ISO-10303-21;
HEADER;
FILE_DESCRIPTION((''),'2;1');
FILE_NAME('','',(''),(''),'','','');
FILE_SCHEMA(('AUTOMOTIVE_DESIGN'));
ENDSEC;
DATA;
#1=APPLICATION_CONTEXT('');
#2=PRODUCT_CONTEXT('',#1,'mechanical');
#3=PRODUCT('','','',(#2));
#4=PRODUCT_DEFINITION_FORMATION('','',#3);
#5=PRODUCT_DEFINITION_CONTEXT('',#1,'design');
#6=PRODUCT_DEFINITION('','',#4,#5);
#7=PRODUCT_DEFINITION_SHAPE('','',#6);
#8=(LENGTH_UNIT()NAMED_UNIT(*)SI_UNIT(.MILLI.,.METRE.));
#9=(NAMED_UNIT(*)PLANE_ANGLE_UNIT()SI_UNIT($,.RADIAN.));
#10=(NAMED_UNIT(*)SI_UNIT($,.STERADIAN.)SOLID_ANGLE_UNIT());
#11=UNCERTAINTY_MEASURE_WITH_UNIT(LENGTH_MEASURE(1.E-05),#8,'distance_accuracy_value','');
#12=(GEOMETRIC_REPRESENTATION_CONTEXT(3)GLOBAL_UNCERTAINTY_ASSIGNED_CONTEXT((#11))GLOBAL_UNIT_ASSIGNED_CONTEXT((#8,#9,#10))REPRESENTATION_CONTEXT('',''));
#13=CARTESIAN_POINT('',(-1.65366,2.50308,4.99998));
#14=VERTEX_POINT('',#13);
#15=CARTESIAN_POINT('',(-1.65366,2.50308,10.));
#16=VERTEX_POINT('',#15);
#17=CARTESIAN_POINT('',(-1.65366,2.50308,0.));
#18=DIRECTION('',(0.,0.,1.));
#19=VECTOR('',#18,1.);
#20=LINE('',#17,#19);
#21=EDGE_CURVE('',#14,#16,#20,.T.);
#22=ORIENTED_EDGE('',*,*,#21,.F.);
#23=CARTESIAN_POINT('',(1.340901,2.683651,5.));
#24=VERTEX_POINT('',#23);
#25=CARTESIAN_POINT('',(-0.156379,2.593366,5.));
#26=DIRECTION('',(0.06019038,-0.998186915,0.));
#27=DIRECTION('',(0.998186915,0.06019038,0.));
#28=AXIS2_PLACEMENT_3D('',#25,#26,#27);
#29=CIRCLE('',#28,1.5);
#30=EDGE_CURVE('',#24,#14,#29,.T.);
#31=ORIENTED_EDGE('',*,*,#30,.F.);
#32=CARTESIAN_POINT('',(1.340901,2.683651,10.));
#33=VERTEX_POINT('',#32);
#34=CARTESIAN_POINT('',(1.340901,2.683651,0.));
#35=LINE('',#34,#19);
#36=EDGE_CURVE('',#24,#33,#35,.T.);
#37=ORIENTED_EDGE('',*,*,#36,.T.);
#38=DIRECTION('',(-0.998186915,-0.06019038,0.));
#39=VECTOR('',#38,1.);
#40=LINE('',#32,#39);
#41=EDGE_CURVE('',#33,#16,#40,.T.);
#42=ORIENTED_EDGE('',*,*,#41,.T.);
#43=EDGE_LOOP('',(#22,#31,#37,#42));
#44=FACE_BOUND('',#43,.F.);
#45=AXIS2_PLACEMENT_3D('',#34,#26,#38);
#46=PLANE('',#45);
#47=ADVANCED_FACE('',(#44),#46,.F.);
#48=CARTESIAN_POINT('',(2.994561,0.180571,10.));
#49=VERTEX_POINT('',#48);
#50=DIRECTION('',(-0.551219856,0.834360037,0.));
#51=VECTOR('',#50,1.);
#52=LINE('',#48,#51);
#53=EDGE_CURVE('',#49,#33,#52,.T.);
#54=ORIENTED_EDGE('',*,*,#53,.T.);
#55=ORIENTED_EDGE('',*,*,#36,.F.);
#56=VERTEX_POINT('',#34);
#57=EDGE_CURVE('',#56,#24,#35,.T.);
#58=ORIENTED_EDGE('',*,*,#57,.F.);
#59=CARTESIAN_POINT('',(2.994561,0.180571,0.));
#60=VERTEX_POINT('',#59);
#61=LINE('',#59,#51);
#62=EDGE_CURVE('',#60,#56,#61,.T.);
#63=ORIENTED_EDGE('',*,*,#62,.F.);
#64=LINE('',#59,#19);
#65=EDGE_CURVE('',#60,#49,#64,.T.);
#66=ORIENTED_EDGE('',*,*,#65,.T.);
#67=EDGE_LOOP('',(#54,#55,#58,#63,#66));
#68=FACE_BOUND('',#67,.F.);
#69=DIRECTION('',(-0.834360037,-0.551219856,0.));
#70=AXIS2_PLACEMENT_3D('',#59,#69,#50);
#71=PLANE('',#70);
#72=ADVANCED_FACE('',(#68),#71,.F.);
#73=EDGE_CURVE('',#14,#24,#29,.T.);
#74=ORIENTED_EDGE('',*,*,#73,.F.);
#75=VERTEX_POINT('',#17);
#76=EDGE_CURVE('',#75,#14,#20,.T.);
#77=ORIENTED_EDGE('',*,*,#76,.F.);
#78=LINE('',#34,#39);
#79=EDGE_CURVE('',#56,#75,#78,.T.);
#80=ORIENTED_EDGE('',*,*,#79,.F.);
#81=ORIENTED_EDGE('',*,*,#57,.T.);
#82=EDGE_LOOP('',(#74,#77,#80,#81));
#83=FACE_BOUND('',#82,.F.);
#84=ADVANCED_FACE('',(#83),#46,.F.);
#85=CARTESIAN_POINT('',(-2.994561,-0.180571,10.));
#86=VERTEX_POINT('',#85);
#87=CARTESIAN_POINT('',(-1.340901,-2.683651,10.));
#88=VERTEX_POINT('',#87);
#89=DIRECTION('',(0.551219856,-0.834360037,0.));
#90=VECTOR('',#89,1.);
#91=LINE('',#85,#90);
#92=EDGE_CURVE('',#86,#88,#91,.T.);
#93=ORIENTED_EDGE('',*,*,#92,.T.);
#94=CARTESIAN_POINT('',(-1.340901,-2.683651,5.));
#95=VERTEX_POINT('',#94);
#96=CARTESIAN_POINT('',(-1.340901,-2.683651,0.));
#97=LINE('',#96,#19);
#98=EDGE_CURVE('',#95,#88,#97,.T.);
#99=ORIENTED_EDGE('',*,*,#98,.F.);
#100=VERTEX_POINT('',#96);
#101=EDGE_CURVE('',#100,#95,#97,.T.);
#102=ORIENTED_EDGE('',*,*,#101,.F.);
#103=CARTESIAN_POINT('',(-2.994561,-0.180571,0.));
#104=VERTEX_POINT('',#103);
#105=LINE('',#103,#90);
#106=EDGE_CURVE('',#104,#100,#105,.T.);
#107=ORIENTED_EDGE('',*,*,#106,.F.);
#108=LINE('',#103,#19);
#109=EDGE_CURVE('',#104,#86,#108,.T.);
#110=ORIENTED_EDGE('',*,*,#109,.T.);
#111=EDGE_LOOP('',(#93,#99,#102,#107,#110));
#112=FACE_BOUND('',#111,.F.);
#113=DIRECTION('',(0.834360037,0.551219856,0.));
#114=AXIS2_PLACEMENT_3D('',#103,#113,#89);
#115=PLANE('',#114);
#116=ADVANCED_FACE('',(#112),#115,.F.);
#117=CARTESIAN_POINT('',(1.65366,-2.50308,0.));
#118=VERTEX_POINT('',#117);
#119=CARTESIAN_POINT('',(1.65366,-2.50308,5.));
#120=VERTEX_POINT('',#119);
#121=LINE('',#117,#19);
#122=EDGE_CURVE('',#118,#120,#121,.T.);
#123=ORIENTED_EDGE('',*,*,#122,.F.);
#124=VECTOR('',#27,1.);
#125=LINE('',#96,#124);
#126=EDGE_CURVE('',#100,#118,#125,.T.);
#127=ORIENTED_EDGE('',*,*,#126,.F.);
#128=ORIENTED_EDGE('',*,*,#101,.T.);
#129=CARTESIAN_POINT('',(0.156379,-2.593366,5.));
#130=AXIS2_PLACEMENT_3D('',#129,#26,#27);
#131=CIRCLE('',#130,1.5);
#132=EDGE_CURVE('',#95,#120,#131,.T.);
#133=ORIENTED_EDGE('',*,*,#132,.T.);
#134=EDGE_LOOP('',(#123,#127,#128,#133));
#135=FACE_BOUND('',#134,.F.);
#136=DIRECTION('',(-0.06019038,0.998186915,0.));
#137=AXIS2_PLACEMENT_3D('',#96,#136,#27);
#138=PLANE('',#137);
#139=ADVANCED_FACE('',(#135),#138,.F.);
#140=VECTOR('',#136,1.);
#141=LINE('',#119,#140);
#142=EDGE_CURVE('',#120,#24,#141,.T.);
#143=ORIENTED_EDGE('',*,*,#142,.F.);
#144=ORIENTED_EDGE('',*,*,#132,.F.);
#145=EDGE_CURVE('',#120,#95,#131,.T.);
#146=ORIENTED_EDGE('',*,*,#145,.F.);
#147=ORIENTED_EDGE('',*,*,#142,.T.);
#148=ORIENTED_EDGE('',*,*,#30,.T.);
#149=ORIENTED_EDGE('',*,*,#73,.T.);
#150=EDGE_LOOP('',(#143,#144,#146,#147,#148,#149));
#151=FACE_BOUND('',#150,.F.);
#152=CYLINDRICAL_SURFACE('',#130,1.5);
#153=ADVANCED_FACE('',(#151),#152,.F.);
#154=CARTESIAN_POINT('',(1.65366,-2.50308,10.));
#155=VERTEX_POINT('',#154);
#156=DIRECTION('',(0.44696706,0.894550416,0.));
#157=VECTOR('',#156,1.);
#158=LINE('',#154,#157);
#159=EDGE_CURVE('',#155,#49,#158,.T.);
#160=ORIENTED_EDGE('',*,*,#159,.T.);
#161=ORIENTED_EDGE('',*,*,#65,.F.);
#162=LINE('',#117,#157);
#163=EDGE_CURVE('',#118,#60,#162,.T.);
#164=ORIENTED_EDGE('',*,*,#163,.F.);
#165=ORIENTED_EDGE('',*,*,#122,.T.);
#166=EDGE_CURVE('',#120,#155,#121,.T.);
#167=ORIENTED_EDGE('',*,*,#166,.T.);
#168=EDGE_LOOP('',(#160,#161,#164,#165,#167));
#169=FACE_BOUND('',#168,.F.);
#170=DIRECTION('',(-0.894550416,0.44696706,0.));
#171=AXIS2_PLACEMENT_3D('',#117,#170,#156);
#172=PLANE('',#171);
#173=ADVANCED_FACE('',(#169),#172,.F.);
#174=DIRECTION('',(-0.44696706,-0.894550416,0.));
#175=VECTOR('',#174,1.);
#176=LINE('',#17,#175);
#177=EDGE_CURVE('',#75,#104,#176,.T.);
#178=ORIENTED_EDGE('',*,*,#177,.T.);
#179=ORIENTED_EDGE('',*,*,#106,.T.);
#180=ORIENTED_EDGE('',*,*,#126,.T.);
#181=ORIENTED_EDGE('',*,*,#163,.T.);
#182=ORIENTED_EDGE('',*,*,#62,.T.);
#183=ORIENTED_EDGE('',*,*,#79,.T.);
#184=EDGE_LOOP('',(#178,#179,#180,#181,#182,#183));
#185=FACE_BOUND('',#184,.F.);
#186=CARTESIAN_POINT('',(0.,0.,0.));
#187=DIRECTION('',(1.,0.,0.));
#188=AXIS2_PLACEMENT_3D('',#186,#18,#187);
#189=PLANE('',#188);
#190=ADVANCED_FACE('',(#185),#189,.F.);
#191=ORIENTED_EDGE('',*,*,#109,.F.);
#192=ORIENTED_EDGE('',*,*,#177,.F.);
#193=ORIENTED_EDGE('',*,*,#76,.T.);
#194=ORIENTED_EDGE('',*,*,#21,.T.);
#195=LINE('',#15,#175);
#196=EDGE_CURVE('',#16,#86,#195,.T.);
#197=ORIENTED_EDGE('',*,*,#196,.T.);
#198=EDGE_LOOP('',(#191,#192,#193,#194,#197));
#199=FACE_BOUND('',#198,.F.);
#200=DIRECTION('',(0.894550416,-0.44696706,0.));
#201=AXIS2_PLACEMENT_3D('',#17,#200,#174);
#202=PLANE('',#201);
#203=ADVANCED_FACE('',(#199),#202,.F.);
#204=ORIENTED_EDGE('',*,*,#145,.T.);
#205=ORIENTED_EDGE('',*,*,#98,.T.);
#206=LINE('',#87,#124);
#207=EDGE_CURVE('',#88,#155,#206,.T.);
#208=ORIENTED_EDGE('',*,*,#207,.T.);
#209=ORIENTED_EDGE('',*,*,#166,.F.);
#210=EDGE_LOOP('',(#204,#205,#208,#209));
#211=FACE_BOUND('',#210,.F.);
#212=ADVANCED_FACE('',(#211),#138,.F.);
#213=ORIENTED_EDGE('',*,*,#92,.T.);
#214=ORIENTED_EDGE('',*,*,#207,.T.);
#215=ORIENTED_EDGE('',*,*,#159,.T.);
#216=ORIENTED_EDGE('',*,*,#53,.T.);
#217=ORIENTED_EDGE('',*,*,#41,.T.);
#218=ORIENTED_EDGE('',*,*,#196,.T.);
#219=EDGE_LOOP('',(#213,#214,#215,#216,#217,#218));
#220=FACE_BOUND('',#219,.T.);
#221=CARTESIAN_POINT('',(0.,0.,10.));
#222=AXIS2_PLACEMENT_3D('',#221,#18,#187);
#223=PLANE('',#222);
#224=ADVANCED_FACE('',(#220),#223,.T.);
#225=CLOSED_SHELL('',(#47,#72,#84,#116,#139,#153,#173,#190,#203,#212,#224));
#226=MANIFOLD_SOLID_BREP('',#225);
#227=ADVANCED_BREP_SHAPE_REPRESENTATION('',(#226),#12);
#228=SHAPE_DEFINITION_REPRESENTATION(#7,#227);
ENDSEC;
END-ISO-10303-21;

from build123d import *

# Parameters (mm, degrees)
F1_DEPTH = 10
F3_DEPTH = 5.1961524227


with BuildPart() as f1:
    # F0 (on Top) → F1 (new body)
    with BuildSketch(Plane.XY):
        Polygon((-1.3409011788, -2.6836512495), (1.6536595675, -2.5030801095), (2.9945607463, 0.18057114), (1.3409011788, 2.6836512495), (-1.6536595675, 2.5030801095), (-2.9945607463, -0.18057114), align=None)
    extrude(amount=F1_DEPTH)

    # F2 (on face) → F3 (cut, through all)
    with BuildSketch(Plane(origin=(0.1563791944, -2.5933656795, 0), x_dir=(0.9981869154, 0.06019038, 0), z_dir=(0.06019038, -0.9981869154, 0))):
        with BuildLine():
            ThreePointArc((-1.5, 5), (0, 3.5), (1.5, 5))
            ThreePointArc((1.5, 5), (0, 6.5), (-1.5, 5))
        make_face()
    extrude(amount=-F3_DEPTH, mode=Mode.SUBTRACT)


solid = f1.part
